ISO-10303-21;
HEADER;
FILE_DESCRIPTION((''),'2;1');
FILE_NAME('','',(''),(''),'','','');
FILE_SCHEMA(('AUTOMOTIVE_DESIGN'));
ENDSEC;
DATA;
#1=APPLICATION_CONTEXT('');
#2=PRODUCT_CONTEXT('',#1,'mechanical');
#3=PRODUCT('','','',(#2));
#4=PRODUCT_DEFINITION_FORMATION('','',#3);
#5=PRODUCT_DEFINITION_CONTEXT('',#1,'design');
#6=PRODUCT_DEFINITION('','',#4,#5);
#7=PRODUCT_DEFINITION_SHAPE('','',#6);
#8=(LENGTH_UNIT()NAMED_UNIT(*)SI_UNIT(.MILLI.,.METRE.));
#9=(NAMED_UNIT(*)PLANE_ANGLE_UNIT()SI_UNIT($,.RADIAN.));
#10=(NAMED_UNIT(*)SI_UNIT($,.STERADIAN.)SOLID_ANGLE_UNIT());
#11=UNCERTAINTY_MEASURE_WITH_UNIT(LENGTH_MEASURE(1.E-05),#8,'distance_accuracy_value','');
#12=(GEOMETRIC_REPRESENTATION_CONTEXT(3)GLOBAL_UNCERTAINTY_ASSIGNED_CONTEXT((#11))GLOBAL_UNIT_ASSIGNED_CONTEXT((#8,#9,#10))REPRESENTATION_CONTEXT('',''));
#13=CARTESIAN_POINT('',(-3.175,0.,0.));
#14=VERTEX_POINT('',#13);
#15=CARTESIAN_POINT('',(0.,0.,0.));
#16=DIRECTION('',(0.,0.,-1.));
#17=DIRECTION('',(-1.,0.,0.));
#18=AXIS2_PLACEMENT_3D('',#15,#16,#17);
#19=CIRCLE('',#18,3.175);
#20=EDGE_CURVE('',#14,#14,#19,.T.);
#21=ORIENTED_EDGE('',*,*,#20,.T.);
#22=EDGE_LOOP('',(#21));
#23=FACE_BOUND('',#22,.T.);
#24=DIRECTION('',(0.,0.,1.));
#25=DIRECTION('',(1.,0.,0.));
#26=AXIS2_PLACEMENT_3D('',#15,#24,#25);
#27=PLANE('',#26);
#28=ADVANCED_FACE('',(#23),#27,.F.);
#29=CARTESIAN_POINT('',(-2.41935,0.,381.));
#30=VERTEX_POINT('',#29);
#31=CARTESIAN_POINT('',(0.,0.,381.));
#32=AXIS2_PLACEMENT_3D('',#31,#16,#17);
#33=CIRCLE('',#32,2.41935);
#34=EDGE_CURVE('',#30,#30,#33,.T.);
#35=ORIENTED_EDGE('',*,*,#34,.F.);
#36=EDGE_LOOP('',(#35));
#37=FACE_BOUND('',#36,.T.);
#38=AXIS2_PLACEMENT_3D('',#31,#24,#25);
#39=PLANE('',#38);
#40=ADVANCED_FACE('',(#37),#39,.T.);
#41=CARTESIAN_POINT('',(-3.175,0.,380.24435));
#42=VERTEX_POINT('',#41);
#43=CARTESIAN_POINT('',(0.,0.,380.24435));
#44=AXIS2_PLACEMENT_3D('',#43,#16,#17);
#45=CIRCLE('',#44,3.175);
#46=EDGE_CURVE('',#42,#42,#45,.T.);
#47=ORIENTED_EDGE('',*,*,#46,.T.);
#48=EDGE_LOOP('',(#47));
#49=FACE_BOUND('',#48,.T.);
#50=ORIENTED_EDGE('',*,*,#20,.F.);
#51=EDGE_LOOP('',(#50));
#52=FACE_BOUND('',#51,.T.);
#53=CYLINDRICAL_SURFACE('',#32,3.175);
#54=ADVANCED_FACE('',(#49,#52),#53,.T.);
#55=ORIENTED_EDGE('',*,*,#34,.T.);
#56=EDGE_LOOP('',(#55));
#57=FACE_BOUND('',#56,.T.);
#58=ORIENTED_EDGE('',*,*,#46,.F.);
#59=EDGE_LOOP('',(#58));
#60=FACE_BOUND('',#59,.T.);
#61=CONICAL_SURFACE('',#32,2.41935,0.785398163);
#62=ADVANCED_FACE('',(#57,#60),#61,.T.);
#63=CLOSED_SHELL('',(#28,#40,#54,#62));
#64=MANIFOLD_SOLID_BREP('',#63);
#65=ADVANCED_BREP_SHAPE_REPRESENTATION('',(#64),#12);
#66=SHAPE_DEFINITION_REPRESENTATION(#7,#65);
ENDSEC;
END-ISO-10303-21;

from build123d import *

# Parameters (mm, degrees)
SKETCH1_R           = 3.81
BOSS_EXTRUDE1_DEPTH = 381


# Read off the part's stored shape, not the designer's step: 1/4-20 Machine Threads Stud1
with BuildPart() as part:
    # Sketch1 → Boss-Extrude1 (new body)
    with BuildSketch(Plane.XY):
        Circle(SKETCH1_R)
    extrude(amount=BOSS_EXTRUDE1_DEPTH)

    # 1/4-20 Machine Threads Stud1 outline → 1/4-20 Machine Threads Stud1 (revolve, cut)
    with BuildSketch(Plane.XZ):
        Polygon((3.81, 381), (2.41935, 381), (3.175, 380.24435), (3.175, 0), (3.81, 0), align=None)
    revolve(axis=Axis((0, 0, 0), (0, 0, 1)), mode=Mode.SUBTRACT)


solid = part.part
